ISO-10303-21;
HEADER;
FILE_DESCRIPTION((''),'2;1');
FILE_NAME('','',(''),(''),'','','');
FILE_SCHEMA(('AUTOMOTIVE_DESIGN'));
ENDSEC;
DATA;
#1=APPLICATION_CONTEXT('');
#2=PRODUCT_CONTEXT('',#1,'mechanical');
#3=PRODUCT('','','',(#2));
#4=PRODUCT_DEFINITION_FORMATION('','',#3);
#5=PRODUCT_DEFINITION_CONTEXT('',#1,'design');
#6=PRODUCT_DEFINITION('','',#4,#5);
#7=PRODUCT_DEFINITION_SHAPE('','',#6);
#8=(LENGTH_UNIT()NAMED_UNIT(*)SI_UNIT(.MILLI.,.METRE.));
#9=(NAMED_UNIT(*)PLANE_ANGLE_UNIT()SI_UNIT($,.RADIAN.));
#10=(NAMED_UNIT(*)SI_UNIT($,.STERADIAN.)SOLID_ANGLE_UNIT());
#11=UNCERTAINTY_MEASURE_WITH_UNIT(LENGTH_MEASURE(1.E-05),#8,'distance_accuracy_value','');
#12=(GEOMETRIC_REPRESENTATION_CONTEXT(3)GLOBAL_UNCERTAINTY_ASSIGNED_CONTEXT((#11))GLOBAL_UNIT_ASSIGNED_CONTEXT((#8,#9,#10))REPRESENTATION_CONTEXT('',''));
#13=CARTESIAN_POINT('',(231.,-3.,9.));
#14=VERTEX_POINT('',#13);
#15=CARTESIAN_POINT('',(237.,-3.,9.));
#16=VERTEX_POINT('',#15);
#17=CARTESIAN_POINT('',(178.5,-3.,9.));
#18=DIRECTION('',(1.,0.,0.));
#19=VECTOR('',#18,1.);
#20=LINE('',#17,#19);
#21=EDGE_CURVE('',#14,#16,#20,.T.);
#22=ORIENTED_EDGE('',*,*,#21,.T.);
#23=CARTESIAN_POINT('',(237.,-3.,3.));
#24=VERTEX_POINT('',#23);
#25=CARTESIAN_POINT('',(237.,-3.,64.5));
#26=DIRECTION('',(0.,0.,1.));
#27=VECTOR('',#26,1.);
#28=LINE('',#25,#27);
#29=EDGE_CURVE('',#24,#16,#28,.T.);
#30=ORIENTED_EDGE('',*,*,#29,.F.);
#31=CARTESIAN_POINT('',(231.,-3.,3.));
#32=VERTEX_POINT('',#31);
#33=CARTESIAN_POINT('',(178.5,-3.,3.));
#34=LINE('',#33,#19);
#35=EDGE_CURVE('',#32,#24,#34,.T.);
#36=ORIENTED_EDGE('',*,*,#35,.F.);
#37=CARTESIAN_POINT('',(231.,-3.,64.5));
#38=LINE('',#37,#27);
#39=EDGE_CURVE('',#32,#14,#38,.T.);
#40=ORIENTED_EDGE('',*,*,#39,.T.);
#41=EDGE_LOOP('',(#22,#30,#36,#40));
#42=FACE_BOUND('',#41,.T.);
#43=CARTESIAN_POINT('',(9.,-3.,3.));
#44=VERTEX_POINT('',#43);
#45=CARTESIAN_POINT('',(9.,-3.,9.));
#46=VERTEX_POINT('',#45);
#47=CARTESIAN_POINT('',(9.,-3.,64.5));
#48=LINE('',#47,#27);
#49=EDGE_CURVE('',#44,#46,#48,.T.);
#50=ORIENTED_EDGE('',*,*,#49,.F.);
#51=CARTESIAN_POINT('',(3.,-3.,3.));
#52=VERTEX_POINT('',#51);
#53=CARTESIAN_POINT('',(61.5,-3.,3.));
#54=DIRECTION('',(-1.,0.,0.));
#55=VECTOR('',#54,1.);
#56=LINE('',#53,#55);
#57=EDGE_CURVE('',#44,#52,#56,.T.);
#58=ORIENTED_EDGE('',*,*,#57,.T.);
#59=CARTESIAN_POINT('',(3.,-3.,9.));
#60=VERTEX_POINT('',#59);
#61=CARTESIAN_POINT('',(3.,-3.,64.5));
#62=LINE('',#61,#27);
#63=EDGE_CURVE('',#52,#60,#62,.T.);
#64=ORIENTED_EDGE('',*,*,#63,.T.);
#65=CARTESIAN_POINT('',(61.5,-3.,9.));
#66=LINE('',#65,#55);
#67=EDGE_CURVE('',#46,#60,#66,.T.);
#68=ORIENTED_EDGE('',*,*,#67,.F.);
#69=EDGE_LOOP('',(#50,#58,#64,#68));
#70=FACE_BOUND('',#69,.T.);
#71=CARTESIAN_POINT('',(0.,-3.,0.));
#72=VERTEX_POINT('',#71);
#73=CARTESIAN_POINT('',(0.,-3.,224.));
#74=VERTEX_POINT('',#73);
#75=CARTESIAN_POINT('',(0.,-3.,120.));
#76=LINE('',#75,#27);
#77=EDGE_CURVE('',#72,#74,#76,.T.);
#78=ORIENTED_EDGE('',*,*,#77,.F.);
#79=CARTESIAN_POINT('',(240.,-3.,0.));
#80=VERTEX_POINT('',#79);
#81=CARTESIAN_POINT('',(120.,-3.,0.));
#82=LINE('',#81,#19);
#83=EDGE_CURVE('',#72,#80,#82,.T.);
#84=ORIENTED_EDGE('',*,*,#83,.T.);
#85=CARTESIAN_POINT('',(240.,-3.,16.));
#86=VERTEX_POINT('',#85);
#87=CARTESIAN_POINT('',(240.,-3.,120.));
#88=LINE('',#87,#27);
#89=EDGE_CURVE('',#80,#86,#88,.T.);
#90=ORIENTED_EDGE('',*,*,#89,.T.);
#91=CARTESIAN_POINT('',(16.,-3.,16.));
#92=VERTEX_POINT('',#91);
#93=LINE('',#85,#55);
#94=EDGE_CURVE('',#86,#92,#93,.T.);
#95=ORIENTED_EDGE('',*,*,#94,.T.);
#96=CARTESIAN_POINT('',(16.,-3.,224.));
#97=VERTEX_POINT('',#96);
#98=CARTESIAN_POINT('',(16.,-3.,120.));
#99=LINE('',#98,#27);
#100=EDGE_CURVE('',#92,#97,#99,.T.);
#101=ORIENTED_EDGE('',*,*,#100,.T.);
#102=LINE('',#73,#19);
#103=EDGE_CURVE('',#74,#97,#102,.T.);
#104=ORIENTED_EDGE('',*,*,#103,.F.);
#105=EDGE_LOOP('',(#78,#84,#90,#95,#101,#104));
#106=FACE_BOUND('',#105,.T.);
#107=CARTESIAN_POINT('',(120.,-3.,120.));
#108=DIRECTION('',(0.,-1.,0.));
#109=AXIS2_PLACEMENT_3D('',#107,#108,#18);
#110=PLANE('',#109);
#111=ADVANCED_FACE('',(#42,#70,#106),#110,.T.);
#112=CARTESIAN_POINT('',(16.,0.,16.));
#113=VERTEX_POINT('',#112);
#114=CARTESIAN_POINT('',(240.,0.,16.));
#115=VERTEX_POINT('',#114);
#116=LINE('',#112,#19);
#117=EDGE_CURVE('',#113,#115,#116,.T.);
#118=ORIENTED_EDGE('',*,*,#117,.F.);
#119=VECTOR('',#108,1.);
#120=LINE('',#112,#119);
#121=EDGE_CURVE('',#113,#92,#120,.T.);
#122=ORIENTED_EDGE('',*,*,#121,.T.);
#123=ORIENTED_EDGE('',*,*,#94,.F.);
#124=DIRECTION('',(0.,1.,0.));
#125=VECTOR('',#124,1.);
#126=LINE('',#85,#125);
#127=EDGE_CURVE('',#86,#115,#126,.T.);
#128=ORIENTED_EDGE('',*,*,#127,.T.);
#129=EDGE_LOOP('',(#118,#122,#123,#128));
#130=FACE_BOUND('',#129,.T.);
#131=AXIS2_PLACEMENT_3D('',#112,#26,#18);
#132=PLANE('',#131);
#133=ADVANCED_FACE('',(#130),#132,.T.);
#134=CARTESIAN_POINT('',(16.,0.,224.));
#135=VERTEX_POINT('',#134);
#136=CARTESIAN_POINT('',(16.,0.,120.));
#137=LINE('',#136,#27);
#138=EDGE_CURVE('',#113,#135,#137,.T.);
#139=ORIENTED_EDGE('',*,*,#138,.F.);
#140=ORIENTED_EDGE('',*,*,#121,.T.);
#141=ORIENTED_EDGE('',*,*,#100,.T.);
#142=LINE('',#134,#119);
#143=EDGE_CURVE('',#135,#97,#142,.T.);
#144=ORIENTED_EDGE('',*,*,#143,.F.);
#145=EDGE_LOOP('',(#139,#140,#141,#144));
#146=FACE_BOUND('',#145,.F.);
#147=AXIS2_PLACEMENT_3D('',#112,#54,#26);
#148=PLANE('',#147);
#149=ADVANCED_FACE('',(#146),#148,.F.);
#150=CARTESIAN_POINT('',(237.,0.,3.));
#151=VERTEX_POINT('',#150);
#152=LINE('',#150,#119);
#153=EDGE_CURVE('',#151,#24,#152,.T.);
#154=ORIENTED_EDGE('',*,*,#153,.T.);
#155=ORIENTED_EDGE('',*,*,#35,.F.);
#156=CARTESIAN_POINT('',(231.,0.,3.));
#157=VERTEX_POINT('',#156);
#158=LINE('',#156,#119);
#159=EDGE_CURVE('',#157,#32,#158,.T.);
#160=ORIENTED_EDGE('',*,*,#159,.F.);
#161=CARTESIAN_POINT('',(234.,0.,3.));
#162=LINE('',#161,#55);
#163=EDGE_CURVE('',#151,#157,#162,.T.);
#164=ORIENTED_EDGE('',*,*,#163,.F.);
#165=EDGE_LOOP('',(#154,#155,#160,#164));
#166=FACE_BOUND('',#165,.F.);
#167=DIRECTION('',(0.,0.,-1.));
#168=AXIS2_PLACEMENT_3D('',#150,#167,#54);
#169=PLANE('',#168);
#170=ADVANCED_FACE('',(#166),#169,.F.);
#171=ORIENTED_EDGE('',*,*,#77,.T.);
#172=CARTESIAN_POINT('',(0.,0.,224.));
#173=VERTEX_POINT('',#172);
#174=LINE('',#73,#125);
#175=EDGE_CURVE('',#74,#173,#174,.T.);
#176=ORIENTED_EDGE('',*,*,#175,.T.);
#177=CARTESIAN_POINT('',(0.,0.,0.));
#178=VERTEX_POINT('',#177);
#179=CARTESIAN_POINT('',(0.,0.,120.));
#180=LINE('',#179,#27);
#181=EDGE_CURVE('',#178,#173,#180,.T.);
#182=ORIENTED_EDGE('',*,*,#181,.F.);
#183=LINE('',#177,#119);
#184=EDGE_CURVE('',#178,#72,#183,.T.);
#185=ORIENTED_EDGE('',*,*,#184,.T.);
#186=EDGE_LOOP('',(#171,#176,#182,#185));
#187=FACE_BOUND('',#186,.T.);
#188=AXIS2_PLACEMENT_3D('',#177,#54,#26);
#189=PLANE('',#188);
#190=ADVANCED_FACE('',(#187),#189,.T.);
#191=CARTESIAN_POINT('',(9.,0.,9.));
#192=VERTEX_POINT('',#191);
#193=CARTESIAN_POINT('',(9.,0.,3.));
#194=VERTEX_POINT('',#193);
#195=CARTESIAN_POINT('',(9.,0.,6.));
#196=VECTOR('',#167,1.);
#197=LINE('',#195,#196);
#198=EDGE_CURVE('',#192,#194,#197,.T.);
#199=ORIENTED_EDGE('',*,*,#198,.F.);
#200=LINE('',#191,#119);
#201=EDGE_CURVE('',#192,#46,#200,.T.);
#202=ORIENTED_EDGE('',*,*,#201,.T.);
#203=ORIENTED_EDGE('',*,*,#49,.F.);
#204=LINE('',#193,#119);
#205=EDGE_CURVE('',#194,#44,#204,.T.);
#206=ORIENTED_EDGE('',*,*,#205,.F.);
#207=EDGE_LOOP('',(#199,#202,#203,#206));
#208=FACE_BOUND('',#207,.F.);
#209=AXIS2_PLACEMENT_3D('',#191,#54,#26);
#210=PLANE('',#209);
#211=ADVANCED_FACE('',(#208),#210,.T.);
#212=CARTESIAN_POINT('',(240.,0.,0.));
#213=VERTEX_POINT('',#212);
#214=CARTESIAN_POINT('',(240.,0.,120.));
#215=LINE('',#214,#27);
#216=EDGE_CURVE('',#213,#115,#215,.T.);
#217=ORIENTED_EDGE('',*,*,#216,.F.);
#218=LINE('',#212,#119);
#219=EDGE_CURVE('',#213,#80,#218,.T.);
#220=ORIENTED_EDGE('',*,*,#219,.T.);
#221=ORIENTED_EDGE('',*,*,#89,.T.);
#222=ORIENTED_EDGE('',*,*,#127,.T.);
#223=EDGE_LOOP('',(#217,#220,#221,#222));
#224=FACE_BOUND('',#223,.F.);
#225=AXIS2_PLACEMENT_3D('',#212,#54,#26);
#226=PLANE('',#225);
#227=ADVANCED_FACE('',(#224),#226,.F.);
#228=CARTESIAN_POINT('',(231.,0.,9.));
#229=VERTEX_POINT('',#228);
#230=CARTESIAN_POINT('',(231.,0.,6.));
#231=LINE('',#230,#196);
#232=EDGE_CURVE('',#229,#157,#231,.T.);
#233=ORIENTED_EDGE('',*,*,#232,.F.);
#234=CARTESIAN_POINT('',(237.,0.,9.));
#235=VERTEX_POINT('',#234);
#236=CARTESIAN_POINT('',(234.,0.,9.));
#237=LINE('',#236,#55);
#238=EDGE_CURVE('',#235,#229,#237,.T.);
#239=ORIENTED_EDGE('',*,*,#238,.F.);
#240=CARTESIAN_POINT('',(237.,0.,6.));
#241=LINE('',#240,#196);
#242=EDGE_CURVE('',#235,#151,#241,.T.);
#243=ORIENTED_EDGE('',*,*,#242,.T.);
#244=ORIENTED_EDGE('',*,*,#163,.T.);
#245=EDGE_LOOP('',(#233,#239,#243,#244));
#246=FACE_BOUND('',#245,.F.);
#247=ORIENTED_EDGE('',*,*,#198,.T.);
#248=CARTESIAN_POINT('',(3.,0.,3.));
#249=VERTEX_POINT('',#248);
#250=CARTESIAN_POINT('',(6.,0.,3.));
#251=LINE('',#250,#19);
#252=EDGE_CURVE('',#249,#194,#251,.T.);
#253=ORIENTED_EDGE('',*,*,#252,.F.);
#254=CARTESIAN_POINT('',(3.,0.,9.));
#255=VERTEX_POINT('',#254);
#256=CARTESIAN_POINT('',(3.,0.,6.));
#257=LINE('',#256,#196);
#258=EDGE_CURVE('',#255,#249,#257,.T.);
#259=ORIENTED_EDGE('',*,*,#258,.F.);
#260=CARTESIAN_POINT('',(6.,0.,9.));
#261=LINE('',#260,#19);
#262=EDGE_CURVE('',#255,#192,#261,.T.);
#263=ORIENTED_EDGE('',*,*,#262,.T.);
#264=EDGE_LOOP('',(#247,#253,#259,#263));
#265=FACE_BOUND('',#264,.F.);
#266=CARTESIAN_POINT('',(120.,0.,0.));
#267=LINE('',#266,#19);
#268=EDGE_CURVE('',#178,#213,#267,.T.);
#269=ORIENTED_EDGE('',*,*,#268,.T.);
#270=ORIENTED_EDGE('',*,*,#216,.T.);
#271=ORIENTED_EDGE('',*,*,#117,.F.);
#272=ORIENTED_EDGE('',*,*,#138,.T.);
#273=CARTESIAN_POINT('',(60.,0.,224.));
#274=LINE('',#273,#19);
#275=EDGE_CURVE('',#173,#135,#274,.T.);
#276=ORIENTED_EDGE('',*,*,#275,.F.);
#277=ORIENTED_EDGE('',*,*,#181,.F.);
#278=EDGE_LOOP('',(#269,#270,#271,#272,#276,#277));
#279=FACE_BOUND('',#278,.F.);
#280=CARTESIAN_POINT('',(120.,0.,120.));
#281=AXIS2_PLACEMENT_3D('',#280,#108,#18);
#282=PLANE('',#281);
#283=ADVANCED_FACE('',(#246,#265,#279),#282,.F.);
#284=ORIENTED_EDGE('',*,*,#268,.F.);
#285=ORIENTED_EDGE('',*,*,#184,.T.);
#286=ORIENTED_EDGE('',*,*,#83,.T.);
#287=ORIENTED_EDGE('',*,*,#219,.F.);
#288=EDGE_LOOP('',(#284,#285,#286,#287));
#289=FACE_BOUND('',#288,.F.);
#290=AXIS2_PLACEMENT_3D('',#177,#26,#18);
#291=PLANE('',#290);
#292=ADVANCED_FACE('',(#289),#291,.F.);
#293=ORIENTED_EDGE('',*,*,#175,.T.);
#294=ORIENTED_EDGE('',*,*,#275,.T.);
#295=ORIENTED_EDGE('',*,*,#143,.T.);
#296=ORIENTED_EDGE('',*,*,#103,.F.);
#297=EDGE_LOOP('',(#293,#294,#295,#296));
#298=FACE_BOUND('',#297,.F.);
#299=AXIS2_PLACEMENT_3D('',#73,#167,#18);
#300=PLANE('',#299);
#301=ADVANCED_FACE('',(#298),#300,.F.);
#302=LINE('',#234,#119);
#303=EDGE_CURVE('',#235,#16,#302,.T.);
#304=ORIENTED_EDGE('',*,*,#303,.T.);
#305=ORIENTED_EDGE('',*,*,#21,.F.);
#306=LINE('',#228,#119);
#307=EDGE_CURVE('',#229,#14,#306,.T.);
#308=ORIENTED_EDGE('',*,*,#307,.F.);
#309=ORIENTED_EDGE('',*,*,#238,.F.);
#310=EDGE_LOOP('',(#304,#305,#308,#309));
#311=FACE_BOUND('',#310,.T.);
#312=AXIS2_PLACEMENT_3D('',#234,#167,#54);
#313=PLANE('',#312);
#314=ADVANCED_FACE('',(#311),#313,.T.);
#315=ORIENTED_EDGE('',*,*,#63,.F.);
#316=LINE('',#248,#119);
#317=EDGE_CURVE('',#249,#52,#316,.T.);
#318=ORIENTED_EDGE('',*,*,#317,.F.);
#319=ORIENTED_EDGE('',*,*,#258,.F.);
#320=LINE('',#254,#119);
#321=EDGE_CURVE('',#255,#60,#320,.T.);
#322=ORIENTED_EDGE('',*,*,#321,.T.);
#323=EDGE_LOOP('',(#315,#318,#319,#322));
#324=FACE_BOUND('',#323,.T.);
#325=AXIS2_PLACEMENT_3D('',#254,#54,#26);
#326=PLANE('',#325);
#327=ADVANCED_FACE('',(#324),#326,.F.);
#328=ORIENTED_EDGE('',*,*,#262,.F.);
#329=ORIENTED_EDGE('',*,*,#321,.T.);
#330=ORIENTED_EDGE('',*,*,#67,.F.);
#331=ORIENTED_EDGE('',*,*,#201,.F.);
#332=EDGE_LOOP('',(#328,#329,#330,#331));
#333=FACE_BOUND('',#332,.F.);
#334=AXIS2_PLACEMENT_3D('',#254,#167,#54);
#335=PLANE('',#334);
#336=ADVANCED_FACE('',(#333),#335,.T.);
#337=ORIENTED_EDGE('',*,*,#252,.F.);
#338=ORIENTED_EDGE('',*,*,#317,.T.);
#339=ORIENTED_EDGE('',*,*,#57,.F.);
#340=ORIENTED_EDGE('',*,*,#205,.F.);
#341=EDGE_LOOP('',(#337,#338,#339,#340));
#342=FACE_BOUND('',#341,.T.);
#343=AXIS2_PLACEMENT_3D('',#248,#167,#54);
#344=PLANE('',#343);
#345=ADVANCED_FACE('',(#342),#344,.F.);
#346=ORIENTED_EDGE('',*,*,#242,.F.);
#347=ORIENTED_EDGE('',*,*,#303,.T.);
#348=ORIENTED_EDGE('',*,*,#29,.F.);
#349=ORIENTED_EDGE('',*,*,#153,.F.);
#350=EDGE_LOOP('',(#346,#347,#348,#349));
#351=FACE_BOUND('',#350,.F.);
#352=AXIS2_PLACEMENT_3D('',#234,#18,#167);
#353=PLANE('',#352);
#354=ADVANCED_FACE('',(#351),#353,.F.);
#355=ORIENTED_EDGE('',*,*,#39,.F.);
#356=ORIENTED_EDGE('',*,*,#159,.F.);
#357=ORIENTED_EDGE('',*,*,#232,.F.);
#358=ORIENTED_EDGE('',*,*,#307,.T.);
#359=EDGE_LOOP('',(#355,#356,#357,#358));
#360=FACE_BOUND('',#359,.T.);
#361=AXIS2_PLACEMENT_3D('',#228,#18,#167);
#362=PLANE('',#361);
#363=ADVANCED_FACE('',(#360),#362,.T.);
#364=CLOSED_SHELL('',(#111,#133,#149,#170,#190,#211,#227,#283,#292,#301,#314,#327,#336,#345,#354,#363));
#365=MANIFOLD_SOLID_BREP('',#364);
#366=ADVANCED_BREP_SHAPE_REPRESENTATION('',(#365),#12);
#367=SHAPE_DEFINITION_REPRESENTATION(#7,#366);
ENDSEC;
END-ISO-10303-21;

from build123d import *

# Parameters (mm, degrees)
F1_W     = 240
F1_H     = 240
F1_W_2   = 6
F1_H_2   = 6
F1_W_3   = 208
F1_H_3   = 208
F2_DEPTH = 3
F3_DEPTH = 25
F8_W     = 6
F8_H     = 6
F8_W_2   = 16
F8_H_2   = 208
F9_DEPTH = 3.001


with BuildPart() as f2:
    # F1 (on Front) → F2 (new body)
    with BuildSketch(Plane.XZ):
        with Locations((120, 120)):
            Rectangle(F1_W, F1_H)
        with Locations((6, 234)):
            Rectangle(F1_W_2, F1_H_2, mode=Mode.SUBTRACT)
        with Locations((120, 120)):
            Rectangle(F1_W_3, F1_H_3, mode=Mode.SUBTRACT)
        with Locations((6, 234)):
            Rectangle(F1_W_2, F1_H_2)
    extrude(amount=F2_DEPTH)

    # F1 (on Front) → F3 (cut)
    with BuildSketch(Plane.XZ):
        with Locations((6, 234)):
            Rectangle(F1_W_2, F1_H_2)
    extrude(amount=F3_DEPTH, mode=Mode.SUBTRACT)

    # F5: F2 across plane


with BuildPart() as f2_1:
    add(f2.part)
    add(f2.part.mirror(Plane(origin=(120, -1.5, 120), x_dir=(0, -1, 0), z_dir=(-1, 0, 0))), mode=Mode.INTERSECT)

    # F7: F2 across plane


with BuildPart() as f2_2:
    add(f2_1.part)
    add(f2_1.part.mirror(Plane(origin=(120, -1.5, 120), x_dir=(1, 0, 0), z_dir=(0, 0, 1))), mode=Mode.INTERSECT)

    # F8 (on face) → F9 (cut, through all)
    with BuildSketch(Plane.XZ.offset(3)):
        Polygon((240, 240), (0, 240), (0, 224), (16, 224), (224, 224), (240, 224), align=None)
        with Locations((6, 234)):
            Rectangle(F8_W, F8_H, mode=Mode.SUBTRACT)
        with Locations((234, 234)):
            Rectangle(F8_W, F8_H, mode=Mode.SUBTRACT)
        with Locations((232, 120)):
            Rectangle(F8_W_2, F8_H_2)
    extrude(amount=-F9_DEPTH, mode=Mode.SUBTRACT)


solid = f2_2.part
